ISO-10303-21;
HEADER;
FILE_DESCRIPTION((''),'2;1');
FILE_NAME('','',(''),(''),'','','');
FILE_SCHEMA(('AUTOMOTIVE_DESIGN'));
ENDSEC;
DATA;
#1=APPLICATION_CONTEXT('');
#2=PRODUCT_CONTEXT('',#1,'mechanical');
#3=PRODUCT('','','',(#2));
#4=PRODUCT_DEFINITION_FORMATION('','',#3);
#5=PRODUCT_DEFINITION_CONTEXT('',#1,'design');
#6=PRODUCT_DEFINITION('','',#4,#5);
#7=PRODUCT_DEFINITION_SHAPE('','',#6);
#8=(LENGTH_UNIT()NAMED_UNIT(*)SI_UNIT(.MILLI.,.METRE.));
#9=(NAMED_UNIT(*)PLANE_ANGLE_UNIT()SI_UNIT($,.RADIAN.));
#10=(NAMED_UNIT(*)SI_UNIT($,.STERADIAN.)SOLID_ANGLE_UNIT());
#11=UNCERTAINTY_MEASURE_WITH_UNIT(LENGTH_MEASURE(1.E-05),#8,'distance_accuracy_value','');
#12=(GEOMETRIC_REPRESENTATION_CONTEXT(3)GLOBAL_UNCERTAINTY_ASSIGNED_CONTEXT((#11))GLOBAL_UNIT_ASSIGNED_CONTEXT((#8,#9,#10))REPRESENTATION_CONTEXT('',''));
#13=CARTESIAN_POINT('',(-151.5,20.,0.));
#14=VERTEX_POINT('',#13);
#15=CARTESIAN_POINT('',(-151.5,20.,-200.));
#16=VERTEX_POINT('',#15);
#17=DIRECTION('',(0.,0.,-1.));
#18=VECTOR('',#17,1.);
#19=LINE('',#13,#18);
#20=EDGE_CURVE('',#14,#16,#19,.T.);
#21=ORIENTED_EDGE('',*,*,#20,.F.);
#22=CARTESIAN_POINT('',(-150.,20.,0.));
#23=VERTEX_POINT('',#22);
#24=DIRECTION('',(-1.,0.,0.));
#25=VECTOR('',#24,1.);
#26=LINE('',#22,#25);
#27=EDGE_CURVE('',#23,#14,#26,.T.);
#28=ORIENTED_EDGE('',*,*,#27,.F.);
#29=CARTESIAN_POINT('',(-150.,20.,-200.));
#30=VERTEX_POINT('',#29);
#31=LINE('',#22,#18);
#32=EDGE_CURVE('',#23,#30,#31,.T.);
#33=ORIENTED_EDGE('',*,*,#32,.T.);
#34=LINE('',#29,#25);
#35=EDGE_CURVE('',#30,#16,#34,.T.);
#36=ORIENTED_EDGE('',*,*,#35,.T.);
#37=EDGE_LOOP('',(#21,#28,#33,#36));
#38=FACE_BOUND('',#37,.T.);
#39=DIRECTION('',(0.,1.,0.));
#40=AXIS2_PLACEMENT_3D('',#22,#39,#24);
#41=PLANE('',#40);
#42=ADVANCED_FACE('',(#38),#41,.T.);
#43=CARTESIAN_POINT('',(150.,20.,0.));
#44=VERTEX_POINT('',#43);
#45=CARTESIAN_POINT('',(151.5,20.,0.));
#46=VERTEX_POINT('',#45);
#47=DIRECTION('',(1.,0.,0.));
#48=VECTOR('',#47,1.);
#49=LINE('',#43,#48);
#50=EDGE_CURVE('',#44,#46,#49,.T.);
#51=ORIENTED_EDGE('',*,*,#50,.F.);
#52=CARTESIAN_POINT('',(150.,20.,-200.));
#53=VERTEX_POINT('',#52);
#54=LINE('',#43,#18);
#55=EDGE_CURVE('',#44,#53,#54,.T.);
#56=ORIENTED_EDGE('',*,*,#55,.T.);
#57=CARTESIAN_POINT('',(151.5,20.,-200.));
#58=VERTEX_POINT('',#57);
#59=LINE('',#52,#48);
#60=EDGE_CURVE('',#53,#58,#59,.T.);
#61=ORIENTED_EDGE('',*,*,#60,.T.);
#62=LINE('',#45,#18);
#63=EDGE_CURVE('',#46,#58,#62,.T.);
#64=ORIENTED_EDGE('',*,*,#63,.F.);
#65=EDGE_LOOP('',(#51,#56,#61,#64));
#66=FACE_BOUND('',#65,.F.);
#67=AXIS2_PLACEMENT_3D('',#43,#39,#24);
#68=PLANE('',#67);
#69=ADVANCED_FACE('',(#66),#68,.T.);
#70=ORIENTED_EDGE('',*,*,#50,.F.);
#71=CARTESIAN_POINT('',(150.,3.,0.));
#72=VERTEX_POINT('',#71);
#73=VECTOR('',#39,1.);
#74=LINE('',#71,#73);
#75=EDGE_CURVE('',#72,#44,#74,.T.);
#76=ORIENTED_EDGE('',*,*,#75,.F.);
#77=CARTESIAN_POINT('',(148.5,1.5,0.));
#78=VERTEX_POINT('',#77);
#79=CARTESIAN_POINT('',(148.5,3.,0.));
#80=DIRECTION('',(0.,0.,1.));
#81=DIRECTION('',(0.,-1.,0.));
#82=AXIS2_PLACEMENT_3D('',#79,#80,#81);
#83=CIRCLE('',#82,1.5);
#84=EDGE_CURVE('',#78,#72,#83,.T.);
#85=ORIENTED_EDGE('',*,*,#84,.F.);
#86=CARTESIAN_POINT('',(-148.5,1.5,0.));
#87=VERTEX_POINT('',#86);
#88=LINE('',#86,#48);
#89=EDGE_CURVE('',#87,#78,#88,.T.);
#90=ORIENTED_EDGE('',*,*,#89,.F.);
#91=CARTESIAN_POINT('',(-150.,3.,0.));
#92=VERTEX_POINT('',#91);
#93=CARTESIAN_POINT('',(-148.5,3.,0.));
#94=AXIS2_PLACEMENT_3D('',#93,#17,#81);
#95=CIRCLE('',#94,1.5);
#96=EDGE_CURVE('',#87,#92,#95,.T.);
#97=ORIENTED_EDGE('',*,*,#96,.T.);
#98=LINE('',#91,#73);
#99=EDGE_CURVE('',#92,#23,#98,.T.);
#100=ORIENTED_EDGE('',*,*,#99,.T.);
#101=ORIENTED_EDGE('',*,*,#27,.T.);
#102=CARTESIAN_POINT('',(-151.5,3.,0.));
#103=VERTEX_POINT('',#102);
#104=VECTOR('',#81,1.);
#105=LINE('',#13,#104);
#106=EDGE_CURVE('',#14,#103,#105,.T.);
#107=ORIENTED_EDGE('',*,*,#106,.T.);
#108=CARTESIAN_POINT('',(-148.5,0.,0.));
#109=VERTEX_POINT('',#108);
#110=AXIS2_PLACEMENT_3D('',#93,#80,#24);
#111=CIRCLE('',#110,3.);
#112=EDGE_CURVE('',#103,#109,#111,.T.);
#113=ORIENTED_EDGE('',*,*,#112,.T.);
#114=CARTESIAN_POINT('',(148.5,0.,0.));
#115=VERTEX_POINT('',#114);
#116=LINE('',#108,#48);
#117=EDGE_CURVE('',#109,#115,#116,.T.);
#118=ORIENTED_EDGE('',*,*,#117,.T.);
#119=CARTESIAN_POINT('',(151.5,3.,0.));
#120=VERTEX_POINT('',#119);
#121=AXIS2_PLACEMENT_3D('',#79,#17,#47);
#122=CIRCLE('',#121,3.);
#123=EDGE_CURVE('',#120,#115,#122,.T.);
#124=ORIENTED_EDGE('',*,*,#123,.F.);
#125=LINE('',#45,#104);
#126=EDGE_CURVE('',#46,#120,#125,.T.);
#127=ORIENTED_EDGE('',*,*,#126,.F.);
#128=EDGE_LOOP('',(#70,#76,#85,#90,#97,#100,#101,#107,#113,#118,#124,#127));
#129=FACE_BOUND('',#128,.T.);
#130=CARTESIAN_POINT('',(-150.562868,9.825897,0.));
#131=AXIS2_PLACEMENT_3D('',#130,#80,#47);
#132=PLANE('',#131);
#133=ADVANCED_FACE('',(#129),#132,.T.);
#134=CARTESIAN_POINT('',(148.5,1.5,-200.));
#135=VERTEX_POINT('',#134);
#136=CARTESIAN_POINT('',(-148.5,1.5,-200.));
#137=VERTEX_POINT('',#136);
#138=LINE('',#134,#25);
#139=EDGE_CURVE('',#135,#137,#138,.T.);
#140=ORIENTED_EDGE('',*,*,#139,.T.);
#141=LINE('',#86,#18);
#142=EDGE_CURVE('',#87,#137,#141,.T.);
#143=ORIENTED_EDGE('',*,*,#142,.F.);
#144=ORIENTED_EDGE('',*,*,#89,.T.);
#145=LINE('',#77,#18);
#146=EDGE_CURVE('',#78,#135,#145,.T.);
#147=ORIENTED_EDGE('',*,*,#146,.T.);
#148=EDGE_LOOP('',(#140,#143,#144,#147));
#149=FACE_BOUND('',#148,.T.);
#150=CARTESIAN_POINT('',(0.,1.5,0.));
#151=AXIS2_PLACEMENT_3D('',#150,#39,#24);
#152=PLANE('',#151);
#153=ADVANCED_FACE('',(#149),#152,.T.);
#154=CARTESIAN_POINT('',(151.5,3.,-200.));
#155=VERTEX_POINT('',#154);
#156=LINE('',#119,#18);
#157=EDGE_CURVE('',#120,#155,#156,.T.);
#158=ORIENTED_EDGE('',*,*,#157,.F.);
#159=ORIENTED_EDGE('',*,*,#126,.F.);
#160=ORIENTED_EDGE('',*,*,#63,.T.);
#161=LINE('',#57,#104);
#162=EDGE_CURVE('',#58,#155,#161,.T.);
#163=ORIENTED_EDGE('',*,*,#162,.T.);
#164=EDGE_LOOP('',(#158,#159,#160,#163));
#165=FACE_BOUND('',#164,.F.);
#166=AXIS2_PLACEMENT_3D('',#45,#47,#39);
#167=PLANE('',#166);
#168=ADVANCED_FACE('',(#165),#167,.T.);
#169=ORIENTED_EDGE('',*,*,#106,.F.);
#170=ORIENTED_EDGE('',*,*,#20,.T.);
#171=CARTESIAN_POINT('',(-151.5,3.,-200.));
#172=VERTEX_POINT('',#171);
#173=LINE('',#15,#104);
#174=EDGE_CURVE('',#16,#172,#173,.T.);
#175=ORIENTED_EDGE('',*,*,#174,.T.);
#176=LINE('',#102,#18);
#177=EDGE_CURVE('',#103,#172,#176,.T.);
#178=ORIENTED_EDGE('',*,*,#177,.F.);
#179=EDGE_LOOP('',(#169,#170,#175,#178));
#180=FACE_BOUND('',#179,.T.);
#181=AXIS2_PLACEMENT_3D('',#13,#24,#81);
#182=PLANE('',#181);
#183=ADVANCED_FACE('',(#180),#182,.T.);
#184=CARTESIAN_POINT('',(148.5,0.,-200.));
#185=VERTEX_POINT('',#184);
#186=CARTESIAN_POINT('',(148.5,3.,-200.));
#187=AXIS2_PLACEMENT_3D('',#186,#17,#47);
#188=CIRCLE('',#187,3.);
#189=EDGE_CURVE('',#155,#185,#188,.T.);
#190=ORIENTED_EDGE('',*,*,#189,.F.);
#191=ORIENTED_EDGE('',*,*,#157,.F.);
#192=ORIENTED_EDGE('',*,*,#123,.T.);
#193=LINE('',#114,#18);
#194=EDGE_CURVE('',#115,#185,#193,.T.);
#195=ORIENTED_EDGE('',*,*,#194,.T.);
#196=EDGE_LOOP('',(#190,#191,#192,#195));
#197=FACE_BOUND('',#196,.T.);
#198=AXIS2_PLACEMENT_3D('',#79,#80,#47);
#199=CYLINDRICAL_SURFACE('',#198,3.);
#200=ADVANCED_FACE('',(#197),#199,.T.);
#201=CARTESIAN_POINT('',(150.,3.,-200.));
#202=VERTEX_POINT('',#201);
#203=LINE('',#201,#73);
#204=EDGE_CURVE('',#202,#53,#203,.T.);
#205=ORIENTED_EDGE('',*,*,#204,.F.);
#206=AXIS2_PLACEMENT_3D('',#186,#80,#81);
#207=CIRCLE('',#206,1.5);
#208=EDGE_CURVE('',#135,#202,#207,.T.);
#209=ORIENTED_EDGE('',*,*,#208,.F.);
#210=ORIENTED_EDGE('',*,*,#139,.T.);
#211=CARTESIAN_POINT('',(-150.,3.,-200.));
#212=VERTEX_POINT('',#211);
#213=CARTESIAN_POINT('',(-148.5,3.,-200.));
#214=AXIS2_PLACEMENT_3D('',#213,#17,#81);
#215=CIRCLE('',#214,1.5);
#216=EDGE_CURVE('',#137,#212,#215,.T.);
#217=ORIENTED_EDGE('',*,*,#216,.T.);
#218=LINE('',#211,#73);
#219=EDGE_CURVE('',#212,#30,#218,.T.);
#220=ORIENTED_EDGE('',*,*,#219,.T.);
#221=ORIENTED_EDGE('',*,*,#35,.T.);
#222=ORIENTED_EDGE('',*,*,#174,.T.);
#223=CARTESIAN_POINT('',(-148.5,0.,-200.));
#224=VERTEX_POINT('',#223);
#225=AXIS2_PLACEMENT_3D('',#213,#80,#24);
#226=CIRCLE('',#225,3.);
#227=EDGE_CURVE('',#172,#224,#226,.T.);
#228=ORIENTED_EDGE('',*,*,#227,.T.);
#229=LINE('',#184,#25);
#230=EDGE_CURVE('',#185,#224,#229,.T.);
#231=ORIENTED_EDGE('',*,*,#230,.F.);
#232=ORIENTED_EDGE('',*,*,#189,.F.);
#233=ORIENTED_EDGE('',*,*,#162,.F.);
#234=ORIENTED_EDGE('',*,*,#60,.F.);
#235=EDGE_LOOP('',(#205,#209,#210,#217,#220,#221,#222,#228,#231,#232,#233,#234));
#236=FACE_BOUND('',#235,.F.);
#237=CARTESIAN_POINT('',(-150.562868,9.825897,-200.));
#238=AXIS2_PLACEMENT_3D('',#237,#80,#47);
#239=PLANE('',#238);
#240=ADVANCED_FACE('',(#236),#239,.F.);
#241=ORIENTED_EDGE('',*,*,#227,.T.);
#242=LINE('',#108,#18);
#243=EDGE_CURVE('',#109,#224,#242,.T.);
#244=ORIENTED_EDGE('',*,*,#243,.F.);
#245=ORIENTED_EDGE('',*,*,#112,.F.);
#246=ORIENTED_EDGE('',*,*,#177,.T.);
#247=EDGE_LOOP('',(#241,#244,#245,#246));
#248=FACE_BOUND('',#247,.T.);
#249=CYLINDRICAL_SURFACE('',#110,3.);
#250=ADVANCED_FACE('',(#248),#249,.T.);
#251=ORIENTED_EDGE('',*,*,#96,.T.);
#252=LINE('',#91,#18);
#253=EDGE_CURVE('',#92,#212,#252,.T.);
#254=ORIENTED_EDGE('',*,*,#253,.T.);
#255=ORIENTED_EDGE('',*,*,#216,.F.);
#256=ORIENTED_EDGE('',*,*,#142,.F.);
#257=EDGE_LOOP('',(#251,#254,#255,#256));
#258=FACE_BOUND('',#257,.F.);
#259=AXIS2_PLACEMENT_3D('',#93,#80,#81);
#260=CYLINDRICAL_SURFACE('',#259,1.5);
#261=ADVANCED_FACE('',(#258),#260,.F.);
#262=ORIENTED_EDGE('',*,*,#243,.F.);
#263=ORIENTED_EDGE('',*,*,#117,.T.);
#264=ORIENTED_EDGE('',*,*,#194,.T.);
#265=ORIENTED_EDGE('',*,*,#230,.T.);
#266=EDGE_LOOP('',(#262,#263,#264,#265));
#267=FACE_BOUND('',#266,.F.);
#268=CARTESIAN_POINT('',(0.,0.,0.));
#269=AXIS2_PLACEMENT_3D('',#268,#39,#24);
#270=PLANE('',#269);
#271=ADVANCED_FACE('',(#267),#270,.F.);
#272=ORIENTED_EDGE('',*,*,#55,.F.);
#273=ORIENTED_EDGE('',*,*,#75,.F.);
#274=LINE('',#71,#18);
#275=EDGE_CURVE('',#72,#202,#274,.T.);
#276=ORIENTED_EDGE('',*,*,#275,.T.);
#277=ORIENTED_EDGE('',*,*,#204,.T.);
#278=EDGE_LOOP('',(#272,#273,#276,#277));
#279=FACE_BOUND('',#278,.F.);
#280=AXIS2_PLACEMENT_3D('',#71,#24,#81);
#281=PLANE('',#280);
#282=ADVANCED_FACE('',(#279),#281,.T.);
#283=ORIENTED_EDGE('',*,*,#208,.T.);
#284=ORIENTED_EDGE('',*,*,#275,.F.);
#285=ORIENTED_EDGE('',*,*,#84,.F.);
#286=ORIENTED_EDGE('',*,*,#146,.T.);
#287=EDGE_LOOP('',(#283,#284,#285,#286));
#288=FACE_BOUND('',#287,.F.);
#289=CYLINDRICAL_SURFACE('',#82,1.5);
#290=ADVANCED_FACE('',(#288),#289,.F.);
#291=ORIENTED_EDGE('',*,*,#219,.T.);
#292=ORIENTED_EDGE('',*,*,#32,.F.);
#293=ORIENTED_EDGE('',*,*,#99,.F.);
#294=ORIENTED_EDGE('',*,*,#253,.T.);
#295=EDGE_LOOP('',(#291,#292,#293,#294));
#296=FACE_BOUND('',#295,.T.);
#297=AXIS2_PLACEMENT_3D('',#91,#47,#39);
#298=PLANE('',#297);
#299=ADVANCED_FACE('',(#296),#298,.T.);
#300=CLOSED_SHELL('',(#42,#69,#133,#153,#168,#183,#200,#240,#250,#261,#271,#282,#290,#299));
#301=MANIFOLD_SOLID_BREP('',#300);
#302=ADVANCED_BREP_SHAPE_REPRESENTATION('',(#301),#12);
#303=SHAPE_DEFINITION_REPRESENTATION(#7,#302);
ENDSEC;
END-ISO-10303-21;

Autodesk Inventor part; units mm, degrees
ref_plane "YZ Plane" through (0, 0, 0) normal (1, 0, 0) x (0, 1, 0)
ref_plane "XZ Plane" through (0, 0, 0) normal (0, 1, 0) x (-1, 0, 0)
ref_plane "XY Plane" through (0, 0, 0) normal (0, 0, 1) x (1, 0, 0)
sketch "Sketch1" plane through (0, 0, 0) normal (0, 1, 0) x (-1, 0, 0)
  line L0 (0, 0) -> (150, 0)
  line L1 (150, 0) -> (150, -200)
  line L2 (150, -200) -> (0, -200)
  line L3 (0, -200) -> (0, 0)
  dimension "d0" = 150
  dimension "d1" = 200
extrude "Plate1" add sketch "Sketch1" along normal blind 1.5
sketch "Sketch2" plane through (-150, 1.5, 0) normal (-1, 0, 0) x (0, -1, 0)
  line L0 (0, -200) -> (0, 0)
  line L1 (0, 0) -> (-18.5, 0)
  line L2 (-18.5, 0) -> (-18.5, -200)
  line L3 (-18.5, -200) -> (0, -200)
edge flange "Flange1" height 20 angle 90 thickness 1.5 bend radius 1.5 thickness toward (-1, 0, 0) relief tear relief width 1.5 relief depth 0.75 edges at (-150, 1.5, -100) wall of the first edge with corners at (-150, 1.5, -200) (-150, 1.5, 0) (-150, 20, 0) (-150, 20, -200)
bend "Bend1"
corner "Corner1"
mirror "Mirror1" about plane through (0, 0, -200) normal (1, 0, 0)
equation "\"d2\" = Thickness"
equation "\"d3\" = BendReliefWidth"
equation "\"d4\" = BendReliefDepth"
equation "\"d5\" = MinimumRemnant"
equation "\"d6\" = TransitionRadius"
equation "\"d9\" = BendRadius"
equation "\"d10\" = CornerReliefSize"
equation "\"d11\" = GapSize"
equation "\"d12\" = JacobiRadiusSize"
equation "\"BendRadius\" = Thickness"
equation "\"BendReliefWidth\" = Thickness"
equation "\"BendReliefDepth\" = 0.5 * Thickness"
equation "\"CornerReliefSize\" = 4 * Thickness"
equation "\"MinimumRemnant\" = 2 * Thickness"
equation "\"TransitionRadius\" = BendRadius"
equation "\"JacobiRadiusSize\" = BendRadius"
equation "\"GapSize\" = Thickness"
equation "\"Thickness\" = 1.5"
properties part number "Magazine bottom"
